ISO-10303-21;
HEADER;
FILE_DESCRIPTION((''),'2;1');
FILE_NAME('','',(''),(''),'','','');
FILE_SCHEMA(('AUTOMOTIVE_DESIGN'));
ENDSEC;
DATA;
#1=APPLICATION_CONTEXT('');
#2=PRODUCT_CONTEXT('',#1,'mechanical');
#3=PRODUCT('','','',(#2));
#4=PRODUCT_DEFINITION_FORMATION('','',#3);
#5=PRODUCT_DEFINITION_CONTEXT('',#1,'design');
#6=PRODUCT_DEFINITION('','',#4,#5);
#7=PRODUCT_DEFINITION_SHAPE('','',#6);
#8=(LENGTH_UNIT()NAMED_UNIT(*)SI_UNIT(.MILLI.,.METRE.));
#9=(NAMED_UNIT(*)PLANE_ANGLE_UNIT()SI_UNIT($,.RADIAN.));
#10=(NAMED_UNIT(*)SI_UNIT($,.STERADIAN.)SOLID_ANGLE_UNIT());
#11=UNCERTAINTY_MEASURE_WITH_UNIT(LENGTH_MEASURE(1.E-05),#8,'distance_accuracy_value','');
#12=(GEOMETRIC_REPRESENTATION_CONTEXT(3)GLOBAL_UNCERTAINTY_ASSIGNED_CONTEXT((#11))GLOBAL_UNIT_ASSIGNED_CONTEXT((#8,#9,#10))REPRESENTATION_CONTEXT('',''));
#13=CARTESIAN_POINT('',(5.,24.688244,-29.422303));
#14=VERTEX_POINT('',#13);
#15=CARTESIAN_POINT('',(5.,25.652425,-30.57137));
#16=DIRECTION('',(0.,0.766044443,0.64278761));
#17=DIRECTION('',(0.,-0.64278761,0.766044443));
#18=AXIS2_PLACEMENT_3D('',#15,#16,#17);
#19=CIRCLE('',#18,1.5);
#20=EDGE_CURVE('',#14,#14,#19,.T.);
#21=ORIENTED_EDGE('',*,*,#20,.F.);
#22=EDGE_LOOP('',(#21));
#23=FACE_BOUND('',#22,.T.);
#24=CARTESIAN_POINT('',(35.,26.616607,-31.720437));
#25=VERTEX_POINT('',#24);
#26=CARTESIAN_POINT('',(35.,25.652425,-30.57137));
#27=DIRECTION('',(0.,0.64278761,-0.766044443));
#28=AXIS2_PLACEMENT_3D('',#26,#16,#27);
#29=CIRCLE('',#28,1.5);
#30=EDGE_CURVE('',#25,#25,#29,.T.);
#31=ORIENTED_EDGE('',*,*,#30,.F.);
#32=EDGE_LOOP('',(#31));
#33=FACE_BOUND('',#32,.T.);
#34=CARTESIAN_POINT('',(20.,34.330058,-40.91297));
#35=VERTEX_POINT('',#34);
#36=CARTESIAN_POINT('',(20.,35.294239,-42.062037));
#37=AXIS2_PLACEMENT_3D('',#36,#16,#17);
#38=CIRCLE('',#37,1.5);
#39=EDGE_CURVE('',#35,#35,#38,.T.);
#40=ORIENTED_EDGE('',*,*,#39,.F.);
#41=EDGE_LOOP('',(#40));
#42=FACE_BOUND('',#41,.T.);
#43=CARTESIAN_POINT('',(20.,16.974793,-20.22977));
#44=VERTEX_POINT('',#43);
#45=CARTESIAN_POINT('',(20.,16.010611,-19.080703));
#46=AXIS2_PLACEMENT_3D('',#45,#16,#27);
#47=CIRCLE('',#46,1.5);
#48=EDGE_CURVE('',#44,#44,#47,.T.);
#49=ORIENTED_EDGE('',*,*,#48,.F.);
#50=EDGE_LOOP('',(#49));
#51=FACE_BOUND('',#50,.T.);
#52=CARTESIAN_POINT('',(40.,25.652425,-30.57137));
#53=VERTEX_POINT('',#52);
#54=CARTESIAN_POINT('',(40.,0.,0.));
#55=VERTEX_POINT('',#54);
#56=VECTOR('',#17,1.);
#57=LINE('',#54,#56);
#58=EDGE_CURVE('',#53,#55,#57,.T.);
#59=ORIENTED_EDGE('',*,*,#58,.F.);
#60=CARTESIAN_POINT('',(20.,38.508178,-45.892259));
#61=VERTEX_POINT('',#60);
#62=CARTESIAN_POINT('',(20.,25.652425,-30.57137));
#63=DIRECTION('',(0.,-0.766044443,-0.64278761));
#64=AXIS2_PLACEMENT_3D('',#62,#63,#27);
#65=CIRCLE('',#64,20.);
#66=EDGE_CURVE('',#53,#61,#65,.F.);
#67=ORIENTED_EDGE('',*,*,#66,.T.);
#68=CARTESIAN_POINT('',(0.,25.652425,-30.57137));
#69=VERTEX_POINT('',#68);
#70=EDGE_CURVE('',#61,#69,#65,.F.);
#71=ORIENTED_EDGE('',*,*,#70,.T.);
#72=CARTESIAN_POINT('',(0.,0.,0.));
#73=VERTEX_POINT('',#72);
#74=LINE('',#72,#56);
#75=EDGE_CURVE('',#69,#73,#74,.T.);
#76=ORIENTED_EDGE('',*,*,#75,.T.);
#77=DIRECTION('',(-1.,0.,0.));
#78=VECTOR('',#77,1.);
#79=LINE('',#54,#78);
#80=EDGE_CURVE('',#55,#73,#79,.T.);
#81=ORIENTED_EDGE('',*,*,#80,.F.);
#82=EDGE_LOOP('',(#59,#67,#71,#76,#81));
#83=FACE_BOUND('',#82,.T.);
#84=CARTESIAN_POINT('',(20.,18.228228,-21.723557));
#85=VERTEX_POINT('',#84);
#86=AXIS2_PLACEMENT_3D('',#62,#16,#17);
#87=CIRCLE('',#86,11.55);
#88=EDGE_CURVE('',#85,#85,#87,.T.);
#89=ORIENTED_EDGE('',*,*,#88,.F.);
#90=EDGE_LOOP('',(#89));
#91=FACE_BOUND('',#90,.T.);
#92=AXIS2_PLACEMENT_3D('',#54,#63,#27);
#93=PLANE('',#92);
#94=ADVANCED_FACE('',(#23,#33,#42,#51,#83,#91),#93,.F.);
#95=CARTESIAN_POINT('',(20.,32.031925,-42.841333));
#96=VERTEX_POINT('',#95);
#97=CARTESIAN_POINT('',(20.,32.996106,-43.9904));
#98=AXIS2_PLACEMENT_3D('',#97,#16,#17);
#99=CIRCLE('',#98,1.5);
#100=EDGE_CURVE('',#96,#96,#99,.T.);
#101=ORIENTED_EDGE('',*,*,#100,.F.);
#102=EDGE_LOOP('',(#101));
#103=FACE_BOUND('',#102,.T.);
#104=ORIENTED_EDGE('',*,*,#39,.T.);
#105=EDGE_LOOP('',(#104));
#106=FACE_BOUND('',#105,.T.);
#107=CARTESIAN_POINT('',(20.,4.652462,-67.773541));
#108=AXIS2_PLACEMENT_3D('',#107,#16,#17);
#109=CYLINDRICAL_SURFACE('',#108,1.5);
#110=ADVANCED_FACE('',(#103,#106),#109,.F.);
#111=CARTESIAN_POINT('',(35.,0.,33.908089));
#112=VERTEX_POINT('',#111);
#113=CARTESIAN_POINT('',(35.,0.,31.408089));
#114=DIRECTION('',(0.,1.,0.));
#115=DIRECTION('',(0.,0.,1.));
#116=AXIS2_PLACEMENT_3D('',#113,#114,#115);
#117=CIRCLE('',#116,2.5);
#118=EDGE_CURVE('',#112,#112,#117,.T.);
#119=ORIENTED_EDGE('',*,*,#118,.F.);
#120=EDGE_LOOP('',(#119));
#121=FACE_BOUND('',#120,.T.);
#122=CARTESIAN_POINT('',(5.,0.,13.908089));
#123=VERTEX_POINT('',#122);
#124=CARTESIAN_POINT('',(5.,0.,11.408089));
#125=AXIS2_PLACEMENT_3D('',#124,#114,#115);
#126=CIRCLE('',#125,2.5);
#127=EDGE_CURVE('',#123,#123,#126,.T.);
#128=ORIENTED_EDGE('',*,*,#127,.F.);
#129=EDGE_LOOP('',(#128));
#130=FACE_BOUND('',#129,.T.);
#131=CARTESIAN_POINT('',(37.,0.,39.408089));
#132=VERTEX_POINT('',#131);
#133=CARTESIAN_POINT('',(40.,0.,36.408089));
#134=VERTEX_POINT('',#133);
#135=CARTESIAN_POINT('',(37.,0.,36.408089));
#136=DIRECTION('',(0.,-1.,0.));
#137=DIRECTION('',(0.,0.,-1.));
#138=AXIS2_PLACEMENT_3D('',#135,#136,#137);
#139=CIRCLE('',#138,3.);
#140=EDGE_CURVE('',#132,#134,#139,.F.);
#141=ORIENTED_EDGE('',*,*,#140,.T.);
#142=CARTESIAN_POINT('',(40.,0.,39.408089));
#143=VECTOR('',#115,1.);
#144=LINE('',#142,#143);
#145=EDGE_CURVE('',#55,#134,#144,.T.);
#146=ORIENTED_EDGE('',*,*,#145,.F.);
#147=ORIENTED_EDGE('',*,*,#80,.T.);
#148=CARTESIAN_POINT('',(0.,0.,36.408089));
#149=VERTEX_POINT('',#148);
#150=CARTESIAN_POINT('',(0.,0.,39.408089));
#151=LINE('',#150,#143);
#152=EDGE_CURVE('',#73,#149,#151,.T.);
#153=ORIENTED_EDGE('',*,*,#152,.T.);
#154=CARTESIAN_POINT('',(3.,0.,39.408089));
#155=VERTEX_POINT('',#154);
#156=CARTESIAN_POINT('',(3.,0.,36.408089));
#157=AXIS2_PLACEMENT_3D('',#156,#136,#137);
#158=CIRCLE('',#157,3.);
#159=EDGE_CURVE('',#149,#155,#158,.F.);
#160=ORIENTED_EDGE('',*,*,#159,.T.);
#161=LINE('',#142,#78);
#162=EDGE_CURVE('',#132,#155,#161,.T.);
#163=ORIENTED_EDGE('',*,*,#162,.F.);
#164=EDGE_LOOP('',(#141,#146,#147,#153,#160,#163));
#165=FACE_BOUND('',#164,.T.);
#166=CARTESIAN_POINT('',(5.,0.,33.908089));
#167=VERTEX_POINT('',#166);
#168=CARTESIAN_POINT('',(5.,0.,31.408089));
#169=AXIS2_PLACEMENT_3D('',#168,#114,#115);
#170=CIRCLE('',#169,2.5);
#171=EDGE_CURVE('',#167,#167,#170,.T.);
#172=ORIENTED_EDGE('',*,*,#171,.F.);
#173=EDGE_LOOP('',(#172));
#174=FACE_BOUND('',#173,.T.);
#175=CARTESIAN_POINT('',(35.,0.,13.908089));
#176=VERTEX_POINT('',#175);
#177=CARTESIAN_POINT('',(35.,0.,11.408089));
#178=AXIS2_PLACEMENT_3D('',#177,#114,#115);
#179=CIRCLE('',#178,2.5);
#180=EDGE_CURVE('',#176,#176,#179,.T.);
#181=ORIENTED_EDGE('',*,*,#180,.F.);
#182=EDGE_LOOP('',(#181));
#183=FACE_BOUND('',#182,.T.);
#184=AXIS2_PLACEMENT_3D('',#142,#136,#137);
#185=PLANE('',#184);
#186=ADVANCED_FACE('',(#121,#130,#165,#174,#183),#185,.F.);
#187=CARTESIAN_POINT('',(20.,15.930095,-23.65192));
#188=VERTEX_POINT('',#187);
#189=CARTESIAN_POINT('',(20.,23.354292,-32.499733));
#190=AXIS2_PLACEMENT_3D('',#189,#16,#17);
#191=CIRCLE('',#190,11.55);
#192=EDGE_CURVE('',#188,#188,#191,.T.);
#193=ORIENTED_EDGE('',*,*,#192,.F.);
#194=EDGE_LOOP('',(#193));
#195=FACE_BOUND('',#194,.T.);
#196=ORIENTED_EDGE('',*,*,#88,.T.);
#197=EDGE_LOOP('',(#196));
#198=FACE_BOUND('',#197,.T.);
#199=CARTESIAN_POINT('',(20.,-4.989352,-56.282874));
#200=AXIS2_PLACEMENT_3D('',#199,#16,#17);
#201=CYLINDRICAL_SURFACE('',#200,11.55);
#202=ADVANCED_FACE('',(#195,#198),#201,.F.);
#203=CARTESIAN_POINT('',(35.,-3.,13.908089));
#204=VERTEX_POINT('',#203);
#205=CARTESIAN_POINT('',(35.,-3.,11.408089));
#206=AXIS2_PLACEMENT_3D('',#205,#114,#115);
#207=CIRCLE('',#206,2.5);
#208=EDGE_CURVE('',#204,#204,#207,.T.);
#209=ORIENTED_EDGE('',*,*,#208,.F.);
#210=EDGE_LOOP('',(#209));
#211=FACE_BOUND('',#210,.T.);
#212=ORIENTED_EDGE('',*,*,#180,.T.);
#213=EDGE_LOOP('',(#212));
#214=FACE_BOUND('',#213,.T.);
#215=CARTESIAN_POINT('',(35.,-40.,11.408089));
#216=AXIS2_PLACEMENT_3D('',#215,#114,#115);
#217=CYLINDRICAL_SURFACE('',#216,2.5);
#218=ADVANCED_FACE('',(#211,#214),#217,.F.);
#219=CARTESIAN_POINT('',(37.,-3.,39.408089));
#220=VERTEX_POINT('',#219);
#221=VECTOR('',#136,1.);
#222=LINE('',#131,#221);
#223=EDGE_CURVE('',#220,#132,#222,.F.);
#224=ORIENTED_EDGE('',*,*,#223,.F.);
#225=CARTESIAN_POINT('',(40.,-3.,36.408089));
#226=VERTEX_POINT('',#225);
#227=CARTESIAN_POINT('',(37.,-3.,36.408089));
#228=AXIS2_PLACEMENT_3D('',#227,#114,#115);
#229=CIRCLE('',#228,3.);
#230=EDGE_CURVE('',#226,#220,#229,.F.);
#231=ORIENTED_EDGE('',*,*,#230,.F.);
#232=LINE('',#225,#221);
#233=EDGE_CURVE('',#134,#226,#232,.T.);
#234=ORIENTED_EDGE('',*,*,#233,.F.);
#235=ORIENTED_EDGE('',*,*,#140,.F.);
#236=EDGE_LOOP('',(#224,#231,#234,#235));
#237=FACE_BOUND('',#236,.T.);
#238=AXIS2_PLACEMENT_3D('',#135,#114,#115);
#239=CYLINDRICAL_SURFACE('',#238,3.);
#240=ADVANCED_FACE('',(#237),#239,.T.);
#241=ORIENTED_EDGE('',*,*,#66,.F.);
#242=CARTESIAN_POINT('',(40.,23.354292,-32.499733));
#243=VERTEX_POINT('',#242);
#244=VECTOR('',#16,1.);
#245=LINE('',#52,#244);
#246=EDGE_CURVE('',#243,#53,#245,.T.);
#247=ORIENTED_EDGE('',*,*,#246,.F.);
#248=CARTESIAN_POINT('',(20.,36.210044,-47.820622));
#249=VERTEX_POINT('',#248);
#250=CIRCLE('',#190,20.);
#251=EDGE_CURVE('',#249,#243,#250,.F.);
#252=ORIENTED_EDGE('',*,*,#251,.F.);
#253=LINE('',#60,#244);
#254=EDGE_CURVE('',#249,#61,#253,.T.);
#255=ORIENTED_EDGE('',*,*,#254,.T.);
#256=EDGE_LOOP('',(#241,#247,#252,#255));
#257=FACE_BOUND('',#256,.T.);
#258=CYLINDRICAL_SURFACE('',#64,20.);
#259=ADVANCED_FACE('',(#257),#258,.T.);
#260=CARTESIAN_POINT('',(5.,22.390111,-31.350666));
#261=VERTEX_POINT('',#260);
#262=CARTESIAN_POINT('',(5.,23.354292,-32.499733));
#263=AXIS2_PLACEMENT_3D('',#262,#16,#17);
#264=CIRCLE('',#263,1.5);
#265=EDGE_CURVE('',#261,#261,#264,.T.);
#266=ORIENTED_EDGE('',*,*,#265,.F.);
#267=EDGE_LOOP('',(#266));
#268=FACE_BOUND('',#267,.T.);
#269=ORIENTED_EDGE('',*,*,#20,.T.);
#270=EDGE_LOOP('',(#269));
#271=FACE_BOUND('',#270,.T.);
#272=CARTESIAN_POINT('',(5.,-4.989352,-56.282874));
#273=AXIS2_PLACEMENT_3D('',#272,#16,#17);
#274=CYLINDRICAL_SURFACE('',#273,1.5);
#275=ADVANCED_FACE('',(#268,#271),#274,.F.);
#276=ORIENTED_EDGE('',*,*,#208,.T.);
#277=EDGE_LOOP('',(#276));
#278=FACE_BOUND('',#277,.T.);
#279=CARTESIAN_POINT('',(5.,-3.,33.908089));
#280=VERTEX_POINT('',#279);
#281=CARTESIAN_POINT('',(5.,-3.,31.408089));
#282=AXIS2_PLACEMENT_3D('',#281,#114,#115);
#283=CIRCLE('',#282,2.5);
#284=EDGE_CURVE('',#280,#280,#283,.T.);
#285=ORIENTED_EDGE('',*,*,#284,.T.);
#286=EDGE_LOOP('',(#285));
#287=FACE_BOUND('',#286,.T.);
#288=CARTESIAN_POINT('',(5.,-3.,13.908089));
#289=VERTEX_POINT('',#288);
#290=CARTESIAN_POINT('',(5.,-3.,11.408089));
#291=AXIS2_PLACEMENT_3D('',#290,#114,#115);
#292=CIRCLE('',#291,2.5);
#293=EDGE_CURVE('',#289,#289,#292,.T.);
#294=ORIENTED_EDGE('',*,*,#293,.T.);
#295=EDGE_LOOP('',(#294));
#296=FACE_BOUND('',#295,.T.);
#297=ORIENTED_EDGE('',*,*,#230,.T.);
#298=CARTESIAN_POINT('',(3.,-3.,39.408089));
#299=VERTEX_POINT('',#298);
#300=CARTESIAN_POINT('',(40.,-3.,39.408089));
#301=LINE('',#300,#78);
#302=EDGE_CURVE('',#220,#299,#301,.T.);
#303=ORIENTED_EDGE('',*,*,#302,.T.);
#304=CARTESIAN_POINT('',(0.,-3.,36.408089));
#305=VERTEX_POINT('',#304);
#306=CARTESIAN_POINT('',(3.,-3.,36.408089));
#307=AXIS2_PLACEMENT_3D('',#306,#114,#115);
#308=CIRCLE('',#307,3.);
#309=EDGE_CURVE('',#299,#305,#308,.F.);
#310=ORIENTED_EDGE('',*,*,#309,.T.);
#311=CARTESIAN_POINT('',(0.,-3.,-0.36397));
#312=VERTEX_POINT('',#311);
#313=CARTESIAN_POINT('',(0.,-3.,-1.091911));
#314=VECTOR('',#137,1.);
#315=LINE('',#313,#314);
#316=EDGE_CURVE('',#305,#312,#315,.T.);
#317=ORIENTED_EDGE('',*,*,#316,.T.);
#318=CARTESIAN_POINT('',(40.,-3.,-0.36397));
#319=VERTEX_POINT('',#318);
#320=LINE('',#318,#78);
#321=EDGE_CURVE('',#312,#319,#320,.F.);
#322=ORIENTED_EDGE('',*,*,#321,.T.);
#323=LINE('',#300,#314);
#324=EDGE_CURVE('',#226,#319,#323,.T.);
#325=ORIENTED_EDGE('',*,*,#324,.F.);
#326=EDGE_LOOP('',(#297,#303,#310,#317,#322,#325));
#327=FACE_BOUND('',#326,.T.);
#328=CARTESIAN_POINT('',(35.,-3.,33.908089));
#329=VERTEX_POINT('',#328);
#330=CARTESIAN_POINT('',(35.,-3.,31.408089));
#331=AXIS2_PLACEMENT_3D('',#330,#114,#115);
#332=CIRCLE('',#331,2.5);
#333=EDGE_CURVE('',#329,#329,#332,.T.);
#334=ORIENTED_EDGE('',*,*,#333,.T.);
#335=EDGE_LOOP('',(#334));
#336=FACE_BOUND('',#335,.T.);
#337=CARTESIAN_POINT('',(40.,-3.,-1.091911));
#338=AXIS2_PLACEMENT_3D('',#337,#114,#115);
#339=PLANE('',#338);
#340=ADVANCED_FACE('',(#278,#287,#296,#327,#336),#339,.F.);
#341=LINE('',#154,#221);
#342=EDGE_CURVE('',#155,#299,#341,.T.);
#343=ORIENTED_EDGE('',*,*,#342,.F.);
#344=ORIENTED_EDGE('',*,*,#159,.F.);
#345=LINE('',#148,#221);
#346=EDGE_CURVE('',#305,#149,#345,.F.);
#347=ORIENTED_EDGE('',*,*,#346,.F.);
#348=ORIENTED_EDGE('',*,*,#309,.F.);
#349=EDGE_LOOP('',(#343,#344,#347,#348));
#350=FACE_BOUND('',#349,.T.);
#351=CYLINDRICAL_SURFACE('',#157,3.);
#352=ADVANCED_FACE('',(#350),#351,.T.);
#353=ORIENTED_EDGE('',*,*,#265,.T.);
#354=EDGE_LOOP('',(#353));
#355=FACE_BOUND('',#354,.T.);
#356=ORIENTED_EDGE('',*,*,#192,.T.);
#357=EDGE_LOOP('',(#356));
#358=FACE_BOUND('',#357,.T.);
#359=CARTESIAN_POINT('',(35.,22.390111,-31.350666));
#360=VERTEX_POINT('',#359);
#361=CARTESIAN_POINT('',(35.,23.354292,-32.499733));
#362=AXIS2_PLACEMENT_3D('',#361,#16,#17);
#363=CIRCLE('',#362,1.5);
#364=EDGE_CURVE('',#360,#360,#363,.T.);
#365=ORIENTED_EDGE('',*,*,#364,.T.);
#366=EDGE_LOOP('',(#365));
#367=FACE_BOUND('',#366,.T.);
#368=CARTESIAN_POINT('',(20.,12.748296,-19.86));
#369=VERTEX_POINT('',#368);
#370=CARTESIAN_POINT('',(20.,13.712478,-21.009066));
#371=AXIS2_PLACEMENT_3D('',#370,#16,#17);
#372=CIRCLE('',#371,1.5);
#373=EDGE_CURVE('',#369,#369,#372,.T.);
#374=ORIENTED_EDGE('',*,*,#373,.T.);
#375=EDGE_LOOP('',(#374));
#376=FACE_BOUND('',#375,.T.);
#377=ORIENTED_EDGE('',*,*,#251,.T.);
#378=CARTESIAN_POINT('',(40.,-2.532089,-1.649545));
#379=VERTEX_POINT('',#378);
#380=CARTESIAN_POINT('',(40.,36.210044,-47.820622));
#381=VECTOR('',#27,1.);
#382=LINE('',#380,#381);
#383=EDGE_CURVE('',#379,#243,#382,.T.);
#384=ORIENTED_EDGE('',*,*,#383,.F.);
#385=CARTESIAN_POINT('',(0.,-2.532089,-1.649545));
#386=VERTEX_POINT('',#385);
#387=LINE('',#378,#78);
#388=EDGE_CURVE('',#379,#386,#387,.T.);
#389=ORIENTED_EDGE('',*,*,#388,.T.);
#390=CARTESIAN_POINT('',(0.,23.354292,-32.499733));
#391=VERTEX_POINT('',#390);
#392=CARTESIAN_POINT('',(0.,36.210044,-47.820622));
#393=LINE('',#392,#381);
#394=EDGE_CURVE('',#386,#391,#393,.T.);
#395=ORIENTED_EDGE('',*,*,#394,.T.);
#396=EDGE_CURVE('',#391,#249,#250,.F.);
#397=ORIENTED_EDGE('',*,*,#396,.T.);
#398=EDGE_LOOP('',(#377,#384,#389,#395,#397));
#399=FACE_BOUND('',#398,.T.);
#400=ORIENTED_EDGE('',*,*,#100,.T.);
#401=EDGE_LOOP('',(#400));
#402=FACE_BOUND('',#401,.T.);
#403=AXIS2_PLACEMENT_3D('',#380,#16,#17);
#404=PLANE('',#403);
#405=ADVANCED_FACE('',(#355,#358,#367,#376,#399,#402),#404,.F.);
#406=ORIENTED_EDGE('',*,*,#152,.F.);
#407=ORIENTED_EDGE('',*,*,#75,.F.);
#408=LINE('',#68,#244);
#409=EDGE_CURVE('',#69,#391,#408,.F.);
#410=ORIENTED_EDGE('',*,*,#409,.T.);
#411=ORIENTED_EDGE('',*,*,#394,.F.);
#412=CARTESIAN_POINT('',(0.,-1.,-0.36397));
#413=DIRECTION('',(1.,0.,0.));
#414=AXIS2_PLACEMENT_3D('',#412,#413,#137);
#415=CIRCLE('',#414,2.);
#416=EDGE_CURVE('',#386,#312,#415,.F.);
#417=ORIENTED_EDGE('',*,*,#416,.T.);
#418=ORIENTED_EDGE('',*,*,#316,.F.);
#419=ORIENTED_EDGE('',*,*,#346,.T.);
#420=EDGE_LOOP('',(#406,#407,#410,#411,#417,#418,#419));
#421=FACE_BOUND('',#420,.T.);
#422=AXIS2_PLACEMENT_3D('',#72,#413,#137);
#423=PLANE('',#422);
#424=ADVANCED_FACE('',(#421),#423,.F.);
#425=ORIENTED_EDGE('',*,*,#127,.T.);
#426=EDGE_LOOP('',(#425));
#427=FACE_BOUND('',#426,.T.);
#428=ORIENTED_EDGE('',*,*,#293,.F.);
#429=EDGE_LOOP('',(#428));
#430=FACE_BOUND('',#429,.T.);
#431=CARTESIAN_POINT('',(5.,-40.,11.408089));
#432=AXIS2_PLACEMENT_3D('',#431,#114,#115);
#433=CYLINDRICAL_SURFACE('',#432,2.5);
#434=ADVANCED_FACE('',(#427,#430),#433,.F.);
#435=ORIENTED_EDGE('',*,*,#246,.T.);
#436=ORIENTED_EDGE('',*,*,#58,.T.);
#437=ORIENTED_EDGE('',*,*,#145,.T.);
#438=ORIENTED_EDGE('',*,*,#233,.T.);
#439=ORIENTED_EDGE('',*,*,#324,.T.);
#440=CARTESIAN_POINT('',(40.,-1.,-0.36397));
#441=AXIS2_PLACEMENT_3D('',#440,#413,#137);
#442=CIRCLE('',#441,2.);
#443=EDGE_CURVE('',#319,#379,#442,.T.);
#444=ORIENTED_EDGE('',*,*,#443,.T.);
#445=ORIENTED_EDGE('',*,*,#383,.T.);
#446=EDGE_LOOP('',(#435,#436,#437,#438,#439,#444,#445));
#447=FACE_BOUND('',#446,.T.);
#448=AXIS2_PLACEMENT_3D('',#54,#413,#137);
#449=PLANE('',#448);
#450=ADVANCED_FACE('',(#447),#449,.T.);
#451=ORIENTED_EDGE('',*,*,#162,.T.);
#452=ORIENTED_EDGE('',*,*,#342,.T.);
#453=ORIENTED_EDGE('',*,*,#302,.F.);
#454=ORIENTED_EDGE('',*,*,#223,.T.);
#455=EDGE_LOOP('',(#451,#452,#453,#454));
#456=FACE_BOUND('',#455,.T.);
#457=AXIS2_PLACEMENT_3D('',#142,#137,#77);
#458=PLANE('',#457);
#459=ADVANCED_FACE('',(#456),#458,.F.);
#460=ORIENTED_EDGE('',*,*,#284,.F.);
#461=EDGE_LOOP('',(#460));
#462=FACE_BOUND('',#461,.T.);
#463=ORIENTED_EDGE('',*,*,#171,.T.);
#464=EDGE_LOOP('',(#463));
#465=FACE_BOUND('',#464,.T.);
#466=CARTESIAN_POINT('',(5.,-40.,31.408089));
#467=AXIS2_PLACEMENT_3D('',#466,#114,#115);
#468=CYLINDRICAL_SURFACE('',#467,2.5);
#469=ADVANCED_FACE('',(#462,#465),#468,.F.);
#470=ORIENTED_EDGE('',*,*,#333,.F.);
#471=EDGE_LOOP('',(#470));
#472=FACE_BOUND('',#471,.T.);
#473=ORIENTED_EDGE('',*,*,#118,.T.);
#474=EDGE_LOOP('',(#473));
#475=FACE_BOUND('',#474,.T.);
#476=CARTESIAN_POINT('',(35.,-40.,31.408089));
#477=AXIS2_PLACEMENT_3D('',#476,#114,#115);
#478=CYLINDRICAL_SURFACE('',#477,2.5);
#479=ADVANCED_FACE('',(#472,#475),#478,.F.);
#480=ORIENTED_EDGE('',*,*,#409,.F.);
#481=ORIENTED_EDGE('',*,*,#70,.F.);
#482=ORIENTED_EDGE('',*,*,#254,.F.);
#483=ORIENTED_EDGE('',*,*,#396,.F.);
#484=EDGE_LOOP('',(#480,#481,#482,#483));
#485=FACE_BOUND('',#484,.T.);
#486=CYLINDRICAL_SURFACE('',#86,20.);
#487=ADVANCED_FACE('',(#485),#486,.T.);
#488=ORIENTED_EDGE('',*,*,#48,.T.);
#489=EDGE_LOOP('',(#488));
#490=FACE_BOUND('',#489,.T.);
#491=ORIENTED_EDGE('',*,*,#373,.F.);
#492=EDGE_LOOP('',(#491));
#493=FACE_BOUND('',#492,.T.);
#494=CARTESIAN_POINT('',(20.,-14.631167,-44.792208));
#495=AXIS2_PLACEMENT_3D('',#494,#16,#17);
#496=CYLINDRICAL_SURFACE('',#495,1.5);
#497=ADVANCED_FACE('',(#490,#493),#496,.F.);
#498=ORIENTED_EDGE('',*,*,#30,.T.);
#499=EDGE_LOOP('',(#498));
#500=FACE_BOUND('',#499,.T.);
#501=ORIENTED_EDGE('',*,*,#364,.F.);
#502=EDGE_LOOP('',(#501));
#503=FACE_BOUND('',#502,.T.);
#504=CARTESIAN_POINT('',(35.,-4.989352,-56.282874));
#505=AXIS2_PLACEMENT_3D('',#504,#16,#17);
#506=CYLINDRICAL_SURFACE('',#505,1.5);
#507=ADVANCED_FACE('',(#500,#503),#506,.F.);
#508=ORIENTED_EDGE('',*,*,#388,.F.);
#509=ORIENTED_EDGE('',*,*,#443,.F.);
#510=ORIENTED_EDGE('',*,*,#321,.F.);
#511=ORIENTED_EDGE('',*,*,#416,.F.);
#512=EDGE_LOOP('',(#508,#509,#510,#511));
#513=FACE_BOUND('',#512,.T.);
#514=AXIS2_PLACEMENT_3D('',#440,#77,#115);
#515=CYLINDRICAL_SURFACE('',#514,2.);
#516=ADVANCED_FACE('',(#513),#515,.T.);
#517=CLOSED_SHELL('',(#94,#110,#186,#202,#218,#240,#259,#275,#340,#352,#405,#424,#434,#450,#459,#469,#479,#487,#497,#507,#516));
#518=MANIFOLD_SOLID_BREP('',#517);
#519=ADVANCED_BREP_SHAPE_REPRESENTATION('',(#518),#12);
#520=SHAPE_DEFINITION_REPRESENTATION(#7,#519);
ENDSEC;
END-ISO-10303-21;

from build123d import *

# Parameters (mm, degrees)
EXTRUDE_1_DEPTH     = 40
SKETCH_3_R          = 2.5
SKETCH_3_R_2        = 2.499999999
CUT_EXTRUDE_1_DEPTH = 40
FILLET_1_R          = 3
FILLET_2_R          = 3
FILLET_3_R          = 20
FILLET_4_R          = 20
SKETCH_4_R          = 11.55
SKETCH_4_R_2        = 1.5
CUT_EXTRUDE_2_DEPTH = 40
FILLET_5_R          = 2


with BuildPart() as part:
    # 草图1 → 凸台-拉伸1 (new body)
    with BuildSketch(Plane(origin=(0, 0, 0), x_dir=(0, 0, -1), z_dir=(1, 0, 0))):
        Polygon((-39.408089297, 0), (0, 0), (45.892258904, 38.50817752), (47.820621733, 36.210044191), (1.091910703, -3), (0.178974486, -3), (-39.408089297, -3), align=None)
    extrude(amount=EXTRUDE_1_DEPTH)

    # 草图3 → 切除-拉伸1 (cut)
    with BuildSketch(Plane(origin=(0, 0, 0), x_dir=(1, 0, 0), z_dir=(0, 1, 0))):
        with Locations(Location((5, -31.408089297, 0), (0, 0, 270))):
            Circle(SKETCH_3_R)
        with Locations(Location((5, -11.408089297, 0), (0, 0, 270))):
            Circle(SKETCH_3_R_2)
        with Locations(Location((35, -11.408089297, 0), (0, 0, 270))):
            Circle(SKETCH_3_R_2)
        with Locations(Location((35, -31.408089297, 0), (0, 0, 270))):
            Circle(SKETCH_3_R)
    extrude(amount=-CUT_EXTRUDE_1_DEPTH, mode=Mode.SUBTRACT)

    # 圆角1
    fillet_1_edges = [part.edges().sort_by_distance(p)[0] for p in [
        (40, -1.5, 39.408089297),
    ]]
    fillet(fillet_1_edges, radius=FILLET_1_R)

    # 圆角2
    fillet_2_edges = [part.edges().sort_by_distance(p)[0] for p in [
        (0, -1.5, 39.408089297),
    ]]
    fillet(fillet_2_edges, radius=FILLET_2_R)

    # 圆角3
    fillet_3_edges = [part.edges().sort_by_distance(p)[0] for p in [
        (0, 37.359110856, -46.856440319),
    ]]
    fillet(fillet_3_edges, radius=FILLET_3_R)

    # 圆角4
    fillet_4_edges = [part.edges().sort_by_distance(p)[0] for p in [
        (40, 37.359110856, -46.856440319),
    ]]
    fillet(fillet_4_edges, radius=FILLET_4_R - 0.0001)  # a hair under: the kernel refuses the full size

    # 草图4 → 切除-拉伸2 (cut)
    with BuildSketch(Plane(origin=(0, 0, 0), x_dir=(1, 0, 0), z_dir=(0, 0.7660444431189773, 0.6427876096865403))):
        with Locations(Location((20, 39.908089297, 0), (0, 0, 270))):
            Circle(SKETCH_4_R)
        with Locations(Location((20, 54.908089297, 0), (0, 0, 270))):
            Circle(SKETCH_4_R_2)
        with Locations(Location((35, 39.908089297, 0), (0, 0, 270))):
            Circle(SKETCH_4_R_2)
        with Locations(Location((5, 39.908089297, 0), (0, 0, 270))):
            Circle(SKETCH_4_R_2)
        with Locations(Location((20, 24.908089297, 0), (0, 0, 270))):
            Circle(SKETCH_4_R_2)
    extrude(amount=-CUT_EXTRUDE_2_DEPTH, mode=Mode.SUBTRACT)

    # 圆角5
    fillet_5_edges = [part.edges().sort_by_distance(p)[0] for p in [
        (20, -3, -1.091910703),
    ]]
    fillet(fillet_5_edges, radius=FILLET_5_R)


solid = part.part
